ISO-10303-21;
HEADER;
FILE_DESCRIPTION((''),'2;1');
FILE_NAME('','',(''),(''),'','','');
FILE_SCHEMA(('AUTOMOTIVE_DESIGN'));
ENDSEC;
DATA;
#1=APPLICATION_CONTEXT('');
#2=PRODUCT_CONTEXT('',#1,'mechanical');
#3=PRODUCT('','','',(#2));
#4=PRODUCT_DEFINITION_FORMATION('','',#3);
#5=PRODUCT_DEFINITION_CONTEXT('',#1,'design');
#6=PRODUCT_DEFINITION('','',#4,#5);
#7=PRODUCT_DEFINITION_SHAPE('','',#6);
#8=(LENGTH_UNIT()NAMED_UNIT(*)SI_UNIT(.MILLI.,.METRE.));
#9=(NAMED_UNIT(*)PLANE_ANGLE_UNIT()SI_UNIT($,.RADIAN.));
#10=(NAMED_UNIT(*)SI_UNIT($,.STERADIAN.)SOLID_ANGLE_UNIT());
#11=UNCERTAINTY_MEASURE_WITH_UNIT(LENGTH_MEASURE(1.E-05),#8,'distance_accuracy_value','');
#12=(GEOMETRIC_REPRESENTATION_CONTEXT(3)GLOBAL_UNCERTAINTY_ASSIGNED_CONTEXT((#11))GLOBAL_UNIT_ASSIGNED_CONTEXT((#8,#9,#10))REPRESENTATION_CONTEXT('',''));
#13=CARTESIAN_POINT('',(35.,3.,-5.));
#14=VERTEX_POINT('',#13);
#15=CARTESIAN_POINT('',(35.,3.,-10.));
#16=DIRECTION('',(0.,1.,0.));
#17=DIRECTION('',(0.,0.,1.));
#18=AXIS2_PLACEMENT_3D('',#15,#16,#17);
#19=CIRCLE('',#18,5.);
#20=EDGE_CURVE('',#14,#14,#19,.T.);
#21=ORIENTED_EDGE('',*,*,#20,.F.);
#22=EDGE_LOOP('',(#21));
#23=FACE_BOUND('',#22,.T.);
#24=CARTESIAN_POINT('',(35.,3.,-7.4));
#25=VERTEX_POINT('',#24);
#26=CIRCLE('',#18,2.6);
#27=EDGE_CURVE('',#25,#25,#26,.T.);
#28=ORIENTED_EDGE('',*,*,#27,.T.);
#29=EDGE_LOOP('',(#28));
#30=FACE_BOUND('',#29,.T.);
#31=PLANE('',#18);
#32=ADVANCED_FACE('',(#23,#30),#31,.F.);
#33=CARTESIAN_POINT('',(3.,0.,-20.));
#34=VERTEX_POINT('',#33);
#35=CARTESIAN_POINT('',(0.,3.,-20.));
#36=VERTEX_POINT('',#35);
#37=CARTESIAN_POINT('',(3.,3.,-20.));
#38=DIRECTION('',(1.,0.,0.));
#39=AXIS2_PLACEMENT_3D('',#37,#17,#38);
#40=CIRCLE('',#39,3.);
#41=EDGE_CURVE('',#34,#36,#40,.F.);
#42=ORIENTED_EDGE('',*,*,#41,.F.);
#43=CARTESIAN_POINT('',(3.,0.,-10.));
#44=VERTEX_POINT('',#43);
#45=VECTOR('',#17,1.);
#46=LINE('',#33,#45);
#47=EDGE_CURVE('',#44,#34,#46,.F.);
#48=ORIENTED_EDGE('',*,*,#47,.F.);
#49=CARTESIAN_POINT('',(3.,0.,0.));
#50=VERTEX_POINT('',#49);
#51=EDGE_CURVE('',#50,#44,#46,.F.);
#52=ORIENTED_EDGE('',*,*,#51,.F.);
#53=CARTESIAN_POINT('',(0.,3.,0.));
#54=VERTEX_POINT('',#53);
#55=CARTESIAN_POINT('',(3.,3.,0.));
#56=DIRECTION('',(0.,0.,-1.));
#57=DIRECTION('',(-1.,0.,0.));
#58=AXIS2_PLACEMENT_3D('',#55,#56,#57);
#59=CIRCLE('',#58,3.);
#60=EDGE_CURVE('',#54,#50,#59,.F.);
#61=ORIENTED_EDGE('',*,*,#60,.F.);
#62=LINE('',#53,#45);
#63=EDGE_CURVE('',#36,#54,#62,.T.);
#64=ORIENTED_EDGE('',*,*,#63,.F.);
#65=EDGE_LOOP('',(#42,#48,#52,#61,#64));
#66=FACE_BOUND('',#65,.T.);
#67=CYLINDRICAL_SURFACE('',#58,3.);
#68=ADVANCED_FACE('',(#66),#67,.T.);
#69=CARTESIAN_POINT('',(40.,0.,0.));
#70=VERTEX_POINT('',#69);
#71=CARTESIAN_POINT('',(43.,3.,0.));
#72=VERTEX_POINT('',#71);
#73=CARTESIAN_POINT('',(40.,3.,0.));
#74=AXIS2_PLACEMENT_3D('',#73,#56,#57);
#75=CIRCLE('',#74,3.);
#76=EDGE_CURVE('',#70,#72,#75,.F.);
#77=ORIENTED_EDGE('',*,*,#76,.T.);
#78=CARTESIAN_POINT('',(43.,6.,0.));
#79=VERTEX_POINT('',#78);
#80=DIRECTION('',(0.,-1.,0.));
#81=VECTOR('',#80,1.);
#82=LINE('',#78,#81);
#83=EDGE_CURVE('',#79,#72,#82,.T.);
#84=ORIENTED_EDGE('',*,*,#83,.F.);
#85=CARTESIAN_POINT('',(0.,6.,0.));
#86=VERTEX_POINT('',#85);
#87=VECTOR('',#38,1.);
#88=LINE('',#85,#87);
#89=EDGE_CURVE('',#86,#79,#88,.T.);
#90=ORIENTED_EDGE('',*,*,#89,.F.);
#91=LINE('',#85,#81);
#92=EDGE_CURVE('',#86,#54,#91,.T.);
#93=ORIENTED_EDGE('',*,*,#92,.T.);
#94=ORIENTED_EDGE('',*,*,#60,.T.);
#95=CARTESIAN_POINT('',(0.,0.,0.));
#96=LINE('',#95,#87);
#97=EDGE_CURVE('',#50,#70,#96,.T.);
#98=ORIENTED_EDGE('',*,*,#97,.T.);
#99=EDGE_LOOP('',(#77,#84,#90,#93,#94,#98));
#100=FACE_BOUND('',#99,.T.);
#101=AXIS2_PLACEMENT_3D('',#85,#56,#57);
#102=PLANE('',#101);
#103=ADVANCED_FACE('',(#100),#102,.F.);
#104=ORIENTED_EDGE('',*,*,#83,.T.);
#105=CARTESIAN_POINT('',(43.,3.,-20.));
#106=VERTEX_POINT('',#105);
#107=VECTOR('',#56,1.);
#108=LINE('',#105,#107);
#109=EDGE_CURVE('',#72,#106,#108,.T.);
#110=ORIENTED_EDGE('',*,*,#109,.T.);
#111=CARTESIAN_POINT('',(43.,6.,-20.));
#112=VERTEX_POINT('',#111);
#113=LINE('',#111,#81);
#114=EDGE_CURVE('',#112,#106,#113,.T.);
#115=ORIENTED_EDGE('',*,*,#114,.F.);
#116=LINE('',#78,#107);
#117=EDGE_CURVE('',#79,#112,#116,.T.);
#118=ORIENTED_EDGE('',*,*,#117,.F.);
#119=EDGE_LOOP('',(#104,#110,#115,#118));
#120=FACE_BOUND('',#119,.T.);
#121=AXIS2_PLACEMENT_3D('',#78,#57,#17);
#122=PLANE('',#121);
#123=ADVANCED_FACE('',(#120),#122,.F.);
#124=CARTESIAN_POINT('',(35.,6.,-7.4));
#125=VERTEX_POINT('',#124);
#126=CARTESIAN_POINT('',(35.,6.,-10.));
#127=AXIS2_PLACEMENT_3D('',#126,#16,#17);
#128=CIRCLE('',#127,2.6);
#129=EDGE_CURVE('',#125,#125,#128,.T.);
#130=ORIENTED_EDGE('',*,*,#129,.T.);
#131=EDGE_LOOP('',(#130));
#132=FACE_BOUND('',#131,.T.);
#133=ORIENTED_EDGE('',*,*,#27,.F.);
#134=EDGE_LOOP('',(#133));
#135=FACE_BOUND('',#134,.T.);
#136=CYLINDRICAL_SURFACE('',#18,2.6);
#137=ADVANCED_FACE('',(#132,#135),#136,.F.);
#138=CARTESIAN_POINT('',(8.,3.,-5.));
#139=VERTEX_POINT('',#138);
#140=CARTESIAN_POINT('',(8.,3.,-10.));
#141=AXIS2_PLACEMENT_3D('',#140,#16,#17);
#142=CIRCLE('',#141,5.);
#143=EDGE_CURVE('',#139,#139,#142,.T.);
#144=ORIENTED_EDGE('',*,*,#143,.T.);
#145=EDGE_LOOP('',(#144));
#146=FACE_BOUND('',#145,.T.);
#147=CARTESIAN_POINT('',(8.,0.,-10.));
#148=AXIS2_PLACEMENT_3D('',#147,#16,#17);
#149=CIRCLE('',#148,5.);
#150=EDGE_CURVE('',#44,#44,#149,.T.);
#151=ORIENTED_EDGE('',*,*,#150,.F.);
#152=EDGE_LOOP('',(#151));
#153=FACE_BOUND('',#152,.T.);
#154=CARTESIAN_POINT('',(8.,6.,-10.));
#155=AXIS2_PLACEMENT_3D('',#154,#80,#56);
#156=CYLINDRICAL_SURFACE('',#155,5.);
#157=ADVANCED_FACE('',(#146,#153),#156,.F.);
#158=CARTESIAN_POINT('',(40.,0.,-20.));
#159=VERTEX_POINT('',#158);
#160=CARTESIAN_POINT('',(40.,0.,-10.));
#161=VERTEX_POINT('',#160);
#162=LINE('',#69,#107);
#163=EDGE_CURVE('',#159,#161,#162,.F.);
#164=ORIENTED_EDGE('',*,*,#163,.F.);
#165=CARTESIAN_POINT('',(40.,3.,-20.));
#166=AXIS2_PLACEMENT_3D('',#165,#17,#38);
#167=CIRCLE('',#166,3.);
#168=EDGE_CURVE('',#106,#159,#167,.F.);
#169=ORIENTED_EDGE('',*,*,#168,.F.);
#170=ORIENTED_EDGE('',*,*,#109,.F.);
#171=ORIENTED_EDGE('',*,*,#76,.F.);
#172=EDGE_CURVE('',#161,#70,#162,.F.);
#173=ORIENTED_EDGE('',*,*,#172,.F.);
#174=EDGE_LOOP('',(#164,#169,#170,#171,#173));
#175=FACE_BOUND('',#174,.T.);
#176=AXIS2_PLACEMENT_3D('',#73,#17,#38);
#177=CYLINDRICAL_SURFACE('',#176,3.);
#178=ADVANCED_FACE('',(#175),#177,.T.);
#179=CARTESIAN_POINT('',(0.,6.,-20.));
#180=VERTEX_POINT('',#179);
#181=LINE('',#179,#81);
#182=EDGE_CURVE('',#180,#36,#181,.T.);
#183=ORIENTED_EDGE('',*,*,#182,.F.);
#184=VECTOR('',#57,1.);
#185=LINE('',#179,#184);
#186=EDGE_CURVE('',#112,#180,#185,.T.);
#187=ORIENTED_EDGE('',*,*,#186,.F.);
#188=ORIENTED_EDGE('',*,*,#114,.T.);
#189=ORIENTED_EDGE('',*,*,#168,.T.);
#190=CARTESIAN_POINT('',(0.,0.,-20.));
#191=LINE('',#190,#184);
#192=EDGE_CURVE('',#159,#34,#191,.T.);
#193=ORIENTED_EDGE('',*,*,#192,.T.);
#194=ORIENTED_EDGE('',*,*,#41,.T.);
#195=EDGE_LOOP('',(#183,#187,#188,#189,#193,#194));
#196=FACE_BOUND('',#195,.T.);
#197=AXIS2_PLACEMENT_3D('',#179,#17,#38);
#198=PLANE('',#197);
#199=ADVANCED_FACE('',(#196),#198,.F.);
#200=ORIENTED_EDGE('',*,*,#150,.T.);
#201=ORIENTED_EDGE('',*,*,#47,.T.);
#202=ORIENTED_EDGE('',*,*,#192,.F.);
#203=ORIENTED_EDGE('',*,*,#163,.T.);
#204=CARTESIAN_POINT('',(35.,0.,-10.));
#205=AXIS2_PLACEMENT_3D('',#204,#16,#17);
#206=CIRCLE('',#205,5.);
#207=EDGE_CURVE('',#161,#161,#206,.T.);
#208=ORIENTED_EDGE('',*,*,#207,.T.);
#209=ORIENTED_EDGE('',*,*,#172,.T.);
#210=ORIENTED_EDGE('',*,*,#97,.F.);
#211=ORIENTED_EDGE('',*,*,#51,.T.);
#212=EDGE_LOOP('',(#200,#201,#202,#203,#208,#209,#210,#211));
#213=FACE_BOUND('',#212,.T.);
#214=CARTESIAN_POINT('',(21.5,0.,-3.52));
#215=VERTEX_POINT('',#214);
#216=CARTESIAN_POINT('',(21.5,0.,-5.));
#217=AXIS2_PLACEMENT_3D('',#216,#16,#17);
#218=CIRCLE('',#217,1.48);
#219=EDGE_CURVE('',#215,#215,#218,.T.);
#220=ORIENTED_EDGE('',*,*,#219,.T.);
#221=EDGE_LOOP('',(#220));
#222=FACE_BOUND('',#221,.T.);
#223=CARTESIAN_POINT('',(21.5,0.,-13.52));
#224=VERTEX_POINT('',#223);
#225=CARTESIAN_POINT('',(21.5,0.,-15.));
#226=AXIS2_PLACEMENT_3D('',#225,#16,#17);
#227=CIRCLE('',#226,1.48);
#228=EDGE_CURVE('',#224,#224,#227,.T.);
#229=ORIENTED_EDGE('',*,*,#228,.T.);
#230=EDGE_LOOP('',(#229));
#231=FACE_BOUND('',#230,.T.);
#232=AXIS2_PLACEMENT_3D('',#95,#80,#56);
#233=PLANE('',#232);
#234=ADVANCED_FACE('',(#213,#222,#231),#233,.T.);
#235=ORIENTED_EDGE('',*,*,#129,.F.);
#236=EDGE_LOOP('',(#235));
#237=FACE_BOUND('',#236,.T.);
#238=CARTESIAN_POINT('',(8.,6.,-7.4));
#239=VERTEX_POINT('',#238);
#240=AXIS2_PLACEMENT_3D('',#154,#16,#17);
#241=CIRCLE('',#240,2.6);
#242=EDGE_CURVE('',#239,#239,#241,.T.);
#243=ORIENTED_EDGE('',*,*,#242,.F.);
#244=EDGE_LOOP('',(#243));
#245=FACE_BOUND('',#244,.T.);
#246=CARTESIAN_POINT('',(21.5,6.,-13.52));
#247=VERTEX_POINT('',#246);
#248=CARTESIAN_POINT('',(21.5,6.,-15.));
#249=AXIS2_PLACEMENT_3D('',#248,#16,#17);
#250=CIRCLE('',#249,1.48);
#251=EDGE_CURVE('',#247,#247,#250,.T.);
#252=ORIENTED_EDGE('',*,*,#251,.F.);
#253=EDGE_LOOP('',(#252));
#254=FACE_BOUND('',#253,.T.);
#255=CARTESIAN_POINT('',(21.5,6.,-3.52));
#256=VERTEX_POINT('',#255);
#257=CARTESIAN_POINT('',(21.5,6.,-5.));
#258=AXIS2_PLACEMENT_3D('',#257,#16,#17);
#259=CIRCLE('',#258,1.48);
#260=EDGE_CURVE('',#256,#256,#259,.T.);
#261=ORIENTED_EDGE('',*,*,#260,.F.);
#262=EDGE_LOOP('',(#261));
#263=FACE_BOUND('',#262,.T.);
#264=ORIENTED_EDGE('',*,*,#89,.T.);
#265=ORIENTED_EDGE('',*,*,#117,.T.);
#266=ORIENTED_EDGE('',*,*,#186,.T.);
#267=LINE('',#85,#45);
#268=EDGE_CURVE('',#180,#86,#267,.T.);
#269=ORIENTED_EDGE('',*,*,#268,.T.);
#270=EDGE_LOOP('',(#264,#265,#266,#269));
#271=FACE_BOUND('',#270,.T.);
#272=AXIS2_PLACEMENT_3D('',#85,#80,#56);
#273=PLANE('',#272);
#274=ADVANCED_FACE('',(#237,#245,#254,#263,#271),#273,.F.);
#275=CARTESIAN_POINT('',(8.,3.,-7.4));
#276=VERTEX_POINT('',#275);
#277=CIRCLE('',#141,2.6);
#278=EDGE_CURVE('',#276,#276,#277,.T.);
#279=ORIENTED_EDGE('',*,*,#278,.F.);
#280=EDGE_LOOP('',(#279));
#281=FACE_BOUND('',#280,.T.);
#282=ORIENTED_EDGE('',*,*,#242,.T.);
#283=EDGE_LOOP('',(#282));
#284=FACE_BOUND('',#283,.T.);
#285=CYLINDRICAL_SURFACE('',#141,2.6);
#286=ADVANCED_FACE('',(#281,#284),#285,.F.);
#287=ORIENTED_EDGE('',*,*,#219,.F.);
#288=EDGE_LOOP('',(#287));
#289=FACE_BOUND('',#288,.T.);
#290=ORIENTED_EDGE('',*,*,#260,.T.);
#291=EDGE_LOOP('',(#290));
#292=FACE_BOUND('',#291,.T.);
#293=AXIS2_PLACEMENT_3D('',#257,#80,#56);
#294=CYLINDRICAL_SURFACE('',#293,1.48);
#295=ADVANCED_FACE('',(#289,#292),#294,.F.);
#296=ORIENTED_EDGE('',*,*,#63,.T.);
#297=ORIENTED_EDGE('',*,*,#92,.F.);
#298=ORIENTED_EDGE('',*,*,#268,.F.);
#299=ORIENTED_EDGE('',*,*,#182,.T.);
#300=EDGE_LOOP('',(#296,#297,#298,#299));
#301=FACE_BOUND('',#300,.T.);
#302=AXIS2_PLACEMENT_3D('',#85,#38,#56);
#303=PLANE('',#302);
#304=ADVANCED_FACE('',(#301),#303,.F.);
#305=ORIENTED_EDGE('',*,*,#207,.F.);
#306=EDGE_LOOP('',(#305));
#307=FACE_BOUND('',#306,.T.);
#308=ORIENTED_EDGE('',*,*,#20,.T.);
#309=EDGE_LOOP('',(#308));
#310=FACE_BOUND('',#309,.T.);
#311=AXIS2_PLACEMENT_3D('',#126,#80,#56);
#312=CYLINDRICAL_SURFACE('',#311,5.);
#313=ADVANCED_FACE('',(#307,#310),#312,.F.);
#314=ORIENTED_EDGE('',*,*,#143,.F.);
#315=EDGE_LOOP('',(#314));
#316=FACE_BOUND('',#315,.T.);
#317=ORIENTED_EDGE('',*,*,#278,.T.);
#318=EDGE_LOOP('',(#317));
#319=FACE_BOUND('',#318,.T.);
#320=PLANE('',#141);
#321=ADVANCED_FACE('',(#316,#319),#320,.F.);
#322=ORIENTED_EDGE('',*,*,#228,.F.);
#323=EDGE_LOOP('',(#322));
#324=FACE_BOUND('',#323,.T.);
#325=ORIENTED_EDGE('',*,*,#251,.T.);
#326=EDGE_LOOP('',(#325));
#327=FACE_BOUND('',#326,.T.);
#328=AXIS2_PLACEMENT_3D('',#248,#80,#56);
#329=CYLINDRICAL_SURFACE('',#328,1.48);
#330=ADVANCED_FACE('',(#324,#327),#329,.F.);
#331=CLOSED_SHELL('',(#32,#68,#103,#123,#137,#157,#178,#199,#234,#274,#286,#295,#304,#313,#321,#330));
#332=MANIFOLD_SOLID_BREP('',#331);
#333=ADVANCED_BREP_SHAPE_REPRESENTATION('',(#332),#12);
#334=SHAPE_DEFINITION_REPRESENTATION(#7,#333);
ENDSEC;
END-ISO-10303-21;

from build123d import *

# Parameters (mm, degrees)
SKETCH_1_W      = 43
SKETCH_1_H      = 20
SKETCH_1_R      = 5
SKETCH_1_R_2    = 1.48
EXTRUDE_1_DEPTH = 6
EXTRUDE_START   = -3
SKETCH_2_R      = 5
SKETCH_2_R_2    = 2.6
EXTRUDE_2_DEPTH = 3
FILLET_1_R      = 3


with BuildPart() as part:
    # 草图1 → 凸台-拉伸1 (new body)
    with BuildSketch(Plane(origin=(0, 0, 0), x_dir=(1, 0, 0), z_dir=(0, 1, 0))):
        with Locations((21.5, 10)):
            Rectangle(SKETCH_1_W, SKETCH_1_H)
        with Locations(Location((8, 10, 0), (0, 0, 270))):
            Circle(SKETCH_1_R, mode=Mode.SUBTRACT)
        with Locations(Location((35, 10, 0), (0, 0, 270))):
            Circle(SKETCH_1_R, mode=Mode.SUBTRACT)
        with Locations(Location((21.5, 15, 0), (0, 0, 270))):
            Circle(SKETCH_1_R_2, mode=Mode.SUBTRACT)
        with Locations(Location((21.5, 5, 0), (0, 0, 270))):
            Circle(SKETCH_1_R_2, mode=Mode.SUBTRACT)
    extrude(amount=EXTRUDE_1_DEPTH)

    # 草图2 → 凸台-拉伸2 (add)
    # profile 1 of 2: a face of its own
    with BuildSketch(Plane(origin=(0, 6, 0), x_dir=(1, 0, 0), z_dir=(0, 1, 0)).offset(EXTRUDE_START)):
        with Locations(Location((8, 10, 0), (0, 0, 270))):
            Circle(SKETCH_2_R)
        with Locations(Location((8, 10, 0), (0, 0, 270))):
            Circle(SKETCH_2_R_2, mode=Mode.SUBTRACT)
    # profile 2 of 2: a face of its own
    with BuildSketch(Plane(origin=(0, 6, 0), x_dir=(1, 0, 0), z_dir=(0, 1, 0)).offset(EXTRUDE_START)):
        with Locations(Location((35, 10, 0), (0, 0, 270))):
            Circle(SKETCH_2_R)
        with Locations(Location((35, 10, 0), (0, 0, 270))):
            Circle(SKETCH_2_R_2, mode=Mode.SUBTRACT)
    extrude(amount=EXTRUDE_2_DEPTH)

    # 圆角1
    fillet_1_edges = [part.edges().sort_by_distance(p)[0] for p in [
        (43, 0, -10),
        (0, 0, -10),
    ]]
    fillet(fillet_1_edges, radius=FILLET_1_R - 0.0001)  # a hair under: the kernel refuses the full size


solid = part.part
